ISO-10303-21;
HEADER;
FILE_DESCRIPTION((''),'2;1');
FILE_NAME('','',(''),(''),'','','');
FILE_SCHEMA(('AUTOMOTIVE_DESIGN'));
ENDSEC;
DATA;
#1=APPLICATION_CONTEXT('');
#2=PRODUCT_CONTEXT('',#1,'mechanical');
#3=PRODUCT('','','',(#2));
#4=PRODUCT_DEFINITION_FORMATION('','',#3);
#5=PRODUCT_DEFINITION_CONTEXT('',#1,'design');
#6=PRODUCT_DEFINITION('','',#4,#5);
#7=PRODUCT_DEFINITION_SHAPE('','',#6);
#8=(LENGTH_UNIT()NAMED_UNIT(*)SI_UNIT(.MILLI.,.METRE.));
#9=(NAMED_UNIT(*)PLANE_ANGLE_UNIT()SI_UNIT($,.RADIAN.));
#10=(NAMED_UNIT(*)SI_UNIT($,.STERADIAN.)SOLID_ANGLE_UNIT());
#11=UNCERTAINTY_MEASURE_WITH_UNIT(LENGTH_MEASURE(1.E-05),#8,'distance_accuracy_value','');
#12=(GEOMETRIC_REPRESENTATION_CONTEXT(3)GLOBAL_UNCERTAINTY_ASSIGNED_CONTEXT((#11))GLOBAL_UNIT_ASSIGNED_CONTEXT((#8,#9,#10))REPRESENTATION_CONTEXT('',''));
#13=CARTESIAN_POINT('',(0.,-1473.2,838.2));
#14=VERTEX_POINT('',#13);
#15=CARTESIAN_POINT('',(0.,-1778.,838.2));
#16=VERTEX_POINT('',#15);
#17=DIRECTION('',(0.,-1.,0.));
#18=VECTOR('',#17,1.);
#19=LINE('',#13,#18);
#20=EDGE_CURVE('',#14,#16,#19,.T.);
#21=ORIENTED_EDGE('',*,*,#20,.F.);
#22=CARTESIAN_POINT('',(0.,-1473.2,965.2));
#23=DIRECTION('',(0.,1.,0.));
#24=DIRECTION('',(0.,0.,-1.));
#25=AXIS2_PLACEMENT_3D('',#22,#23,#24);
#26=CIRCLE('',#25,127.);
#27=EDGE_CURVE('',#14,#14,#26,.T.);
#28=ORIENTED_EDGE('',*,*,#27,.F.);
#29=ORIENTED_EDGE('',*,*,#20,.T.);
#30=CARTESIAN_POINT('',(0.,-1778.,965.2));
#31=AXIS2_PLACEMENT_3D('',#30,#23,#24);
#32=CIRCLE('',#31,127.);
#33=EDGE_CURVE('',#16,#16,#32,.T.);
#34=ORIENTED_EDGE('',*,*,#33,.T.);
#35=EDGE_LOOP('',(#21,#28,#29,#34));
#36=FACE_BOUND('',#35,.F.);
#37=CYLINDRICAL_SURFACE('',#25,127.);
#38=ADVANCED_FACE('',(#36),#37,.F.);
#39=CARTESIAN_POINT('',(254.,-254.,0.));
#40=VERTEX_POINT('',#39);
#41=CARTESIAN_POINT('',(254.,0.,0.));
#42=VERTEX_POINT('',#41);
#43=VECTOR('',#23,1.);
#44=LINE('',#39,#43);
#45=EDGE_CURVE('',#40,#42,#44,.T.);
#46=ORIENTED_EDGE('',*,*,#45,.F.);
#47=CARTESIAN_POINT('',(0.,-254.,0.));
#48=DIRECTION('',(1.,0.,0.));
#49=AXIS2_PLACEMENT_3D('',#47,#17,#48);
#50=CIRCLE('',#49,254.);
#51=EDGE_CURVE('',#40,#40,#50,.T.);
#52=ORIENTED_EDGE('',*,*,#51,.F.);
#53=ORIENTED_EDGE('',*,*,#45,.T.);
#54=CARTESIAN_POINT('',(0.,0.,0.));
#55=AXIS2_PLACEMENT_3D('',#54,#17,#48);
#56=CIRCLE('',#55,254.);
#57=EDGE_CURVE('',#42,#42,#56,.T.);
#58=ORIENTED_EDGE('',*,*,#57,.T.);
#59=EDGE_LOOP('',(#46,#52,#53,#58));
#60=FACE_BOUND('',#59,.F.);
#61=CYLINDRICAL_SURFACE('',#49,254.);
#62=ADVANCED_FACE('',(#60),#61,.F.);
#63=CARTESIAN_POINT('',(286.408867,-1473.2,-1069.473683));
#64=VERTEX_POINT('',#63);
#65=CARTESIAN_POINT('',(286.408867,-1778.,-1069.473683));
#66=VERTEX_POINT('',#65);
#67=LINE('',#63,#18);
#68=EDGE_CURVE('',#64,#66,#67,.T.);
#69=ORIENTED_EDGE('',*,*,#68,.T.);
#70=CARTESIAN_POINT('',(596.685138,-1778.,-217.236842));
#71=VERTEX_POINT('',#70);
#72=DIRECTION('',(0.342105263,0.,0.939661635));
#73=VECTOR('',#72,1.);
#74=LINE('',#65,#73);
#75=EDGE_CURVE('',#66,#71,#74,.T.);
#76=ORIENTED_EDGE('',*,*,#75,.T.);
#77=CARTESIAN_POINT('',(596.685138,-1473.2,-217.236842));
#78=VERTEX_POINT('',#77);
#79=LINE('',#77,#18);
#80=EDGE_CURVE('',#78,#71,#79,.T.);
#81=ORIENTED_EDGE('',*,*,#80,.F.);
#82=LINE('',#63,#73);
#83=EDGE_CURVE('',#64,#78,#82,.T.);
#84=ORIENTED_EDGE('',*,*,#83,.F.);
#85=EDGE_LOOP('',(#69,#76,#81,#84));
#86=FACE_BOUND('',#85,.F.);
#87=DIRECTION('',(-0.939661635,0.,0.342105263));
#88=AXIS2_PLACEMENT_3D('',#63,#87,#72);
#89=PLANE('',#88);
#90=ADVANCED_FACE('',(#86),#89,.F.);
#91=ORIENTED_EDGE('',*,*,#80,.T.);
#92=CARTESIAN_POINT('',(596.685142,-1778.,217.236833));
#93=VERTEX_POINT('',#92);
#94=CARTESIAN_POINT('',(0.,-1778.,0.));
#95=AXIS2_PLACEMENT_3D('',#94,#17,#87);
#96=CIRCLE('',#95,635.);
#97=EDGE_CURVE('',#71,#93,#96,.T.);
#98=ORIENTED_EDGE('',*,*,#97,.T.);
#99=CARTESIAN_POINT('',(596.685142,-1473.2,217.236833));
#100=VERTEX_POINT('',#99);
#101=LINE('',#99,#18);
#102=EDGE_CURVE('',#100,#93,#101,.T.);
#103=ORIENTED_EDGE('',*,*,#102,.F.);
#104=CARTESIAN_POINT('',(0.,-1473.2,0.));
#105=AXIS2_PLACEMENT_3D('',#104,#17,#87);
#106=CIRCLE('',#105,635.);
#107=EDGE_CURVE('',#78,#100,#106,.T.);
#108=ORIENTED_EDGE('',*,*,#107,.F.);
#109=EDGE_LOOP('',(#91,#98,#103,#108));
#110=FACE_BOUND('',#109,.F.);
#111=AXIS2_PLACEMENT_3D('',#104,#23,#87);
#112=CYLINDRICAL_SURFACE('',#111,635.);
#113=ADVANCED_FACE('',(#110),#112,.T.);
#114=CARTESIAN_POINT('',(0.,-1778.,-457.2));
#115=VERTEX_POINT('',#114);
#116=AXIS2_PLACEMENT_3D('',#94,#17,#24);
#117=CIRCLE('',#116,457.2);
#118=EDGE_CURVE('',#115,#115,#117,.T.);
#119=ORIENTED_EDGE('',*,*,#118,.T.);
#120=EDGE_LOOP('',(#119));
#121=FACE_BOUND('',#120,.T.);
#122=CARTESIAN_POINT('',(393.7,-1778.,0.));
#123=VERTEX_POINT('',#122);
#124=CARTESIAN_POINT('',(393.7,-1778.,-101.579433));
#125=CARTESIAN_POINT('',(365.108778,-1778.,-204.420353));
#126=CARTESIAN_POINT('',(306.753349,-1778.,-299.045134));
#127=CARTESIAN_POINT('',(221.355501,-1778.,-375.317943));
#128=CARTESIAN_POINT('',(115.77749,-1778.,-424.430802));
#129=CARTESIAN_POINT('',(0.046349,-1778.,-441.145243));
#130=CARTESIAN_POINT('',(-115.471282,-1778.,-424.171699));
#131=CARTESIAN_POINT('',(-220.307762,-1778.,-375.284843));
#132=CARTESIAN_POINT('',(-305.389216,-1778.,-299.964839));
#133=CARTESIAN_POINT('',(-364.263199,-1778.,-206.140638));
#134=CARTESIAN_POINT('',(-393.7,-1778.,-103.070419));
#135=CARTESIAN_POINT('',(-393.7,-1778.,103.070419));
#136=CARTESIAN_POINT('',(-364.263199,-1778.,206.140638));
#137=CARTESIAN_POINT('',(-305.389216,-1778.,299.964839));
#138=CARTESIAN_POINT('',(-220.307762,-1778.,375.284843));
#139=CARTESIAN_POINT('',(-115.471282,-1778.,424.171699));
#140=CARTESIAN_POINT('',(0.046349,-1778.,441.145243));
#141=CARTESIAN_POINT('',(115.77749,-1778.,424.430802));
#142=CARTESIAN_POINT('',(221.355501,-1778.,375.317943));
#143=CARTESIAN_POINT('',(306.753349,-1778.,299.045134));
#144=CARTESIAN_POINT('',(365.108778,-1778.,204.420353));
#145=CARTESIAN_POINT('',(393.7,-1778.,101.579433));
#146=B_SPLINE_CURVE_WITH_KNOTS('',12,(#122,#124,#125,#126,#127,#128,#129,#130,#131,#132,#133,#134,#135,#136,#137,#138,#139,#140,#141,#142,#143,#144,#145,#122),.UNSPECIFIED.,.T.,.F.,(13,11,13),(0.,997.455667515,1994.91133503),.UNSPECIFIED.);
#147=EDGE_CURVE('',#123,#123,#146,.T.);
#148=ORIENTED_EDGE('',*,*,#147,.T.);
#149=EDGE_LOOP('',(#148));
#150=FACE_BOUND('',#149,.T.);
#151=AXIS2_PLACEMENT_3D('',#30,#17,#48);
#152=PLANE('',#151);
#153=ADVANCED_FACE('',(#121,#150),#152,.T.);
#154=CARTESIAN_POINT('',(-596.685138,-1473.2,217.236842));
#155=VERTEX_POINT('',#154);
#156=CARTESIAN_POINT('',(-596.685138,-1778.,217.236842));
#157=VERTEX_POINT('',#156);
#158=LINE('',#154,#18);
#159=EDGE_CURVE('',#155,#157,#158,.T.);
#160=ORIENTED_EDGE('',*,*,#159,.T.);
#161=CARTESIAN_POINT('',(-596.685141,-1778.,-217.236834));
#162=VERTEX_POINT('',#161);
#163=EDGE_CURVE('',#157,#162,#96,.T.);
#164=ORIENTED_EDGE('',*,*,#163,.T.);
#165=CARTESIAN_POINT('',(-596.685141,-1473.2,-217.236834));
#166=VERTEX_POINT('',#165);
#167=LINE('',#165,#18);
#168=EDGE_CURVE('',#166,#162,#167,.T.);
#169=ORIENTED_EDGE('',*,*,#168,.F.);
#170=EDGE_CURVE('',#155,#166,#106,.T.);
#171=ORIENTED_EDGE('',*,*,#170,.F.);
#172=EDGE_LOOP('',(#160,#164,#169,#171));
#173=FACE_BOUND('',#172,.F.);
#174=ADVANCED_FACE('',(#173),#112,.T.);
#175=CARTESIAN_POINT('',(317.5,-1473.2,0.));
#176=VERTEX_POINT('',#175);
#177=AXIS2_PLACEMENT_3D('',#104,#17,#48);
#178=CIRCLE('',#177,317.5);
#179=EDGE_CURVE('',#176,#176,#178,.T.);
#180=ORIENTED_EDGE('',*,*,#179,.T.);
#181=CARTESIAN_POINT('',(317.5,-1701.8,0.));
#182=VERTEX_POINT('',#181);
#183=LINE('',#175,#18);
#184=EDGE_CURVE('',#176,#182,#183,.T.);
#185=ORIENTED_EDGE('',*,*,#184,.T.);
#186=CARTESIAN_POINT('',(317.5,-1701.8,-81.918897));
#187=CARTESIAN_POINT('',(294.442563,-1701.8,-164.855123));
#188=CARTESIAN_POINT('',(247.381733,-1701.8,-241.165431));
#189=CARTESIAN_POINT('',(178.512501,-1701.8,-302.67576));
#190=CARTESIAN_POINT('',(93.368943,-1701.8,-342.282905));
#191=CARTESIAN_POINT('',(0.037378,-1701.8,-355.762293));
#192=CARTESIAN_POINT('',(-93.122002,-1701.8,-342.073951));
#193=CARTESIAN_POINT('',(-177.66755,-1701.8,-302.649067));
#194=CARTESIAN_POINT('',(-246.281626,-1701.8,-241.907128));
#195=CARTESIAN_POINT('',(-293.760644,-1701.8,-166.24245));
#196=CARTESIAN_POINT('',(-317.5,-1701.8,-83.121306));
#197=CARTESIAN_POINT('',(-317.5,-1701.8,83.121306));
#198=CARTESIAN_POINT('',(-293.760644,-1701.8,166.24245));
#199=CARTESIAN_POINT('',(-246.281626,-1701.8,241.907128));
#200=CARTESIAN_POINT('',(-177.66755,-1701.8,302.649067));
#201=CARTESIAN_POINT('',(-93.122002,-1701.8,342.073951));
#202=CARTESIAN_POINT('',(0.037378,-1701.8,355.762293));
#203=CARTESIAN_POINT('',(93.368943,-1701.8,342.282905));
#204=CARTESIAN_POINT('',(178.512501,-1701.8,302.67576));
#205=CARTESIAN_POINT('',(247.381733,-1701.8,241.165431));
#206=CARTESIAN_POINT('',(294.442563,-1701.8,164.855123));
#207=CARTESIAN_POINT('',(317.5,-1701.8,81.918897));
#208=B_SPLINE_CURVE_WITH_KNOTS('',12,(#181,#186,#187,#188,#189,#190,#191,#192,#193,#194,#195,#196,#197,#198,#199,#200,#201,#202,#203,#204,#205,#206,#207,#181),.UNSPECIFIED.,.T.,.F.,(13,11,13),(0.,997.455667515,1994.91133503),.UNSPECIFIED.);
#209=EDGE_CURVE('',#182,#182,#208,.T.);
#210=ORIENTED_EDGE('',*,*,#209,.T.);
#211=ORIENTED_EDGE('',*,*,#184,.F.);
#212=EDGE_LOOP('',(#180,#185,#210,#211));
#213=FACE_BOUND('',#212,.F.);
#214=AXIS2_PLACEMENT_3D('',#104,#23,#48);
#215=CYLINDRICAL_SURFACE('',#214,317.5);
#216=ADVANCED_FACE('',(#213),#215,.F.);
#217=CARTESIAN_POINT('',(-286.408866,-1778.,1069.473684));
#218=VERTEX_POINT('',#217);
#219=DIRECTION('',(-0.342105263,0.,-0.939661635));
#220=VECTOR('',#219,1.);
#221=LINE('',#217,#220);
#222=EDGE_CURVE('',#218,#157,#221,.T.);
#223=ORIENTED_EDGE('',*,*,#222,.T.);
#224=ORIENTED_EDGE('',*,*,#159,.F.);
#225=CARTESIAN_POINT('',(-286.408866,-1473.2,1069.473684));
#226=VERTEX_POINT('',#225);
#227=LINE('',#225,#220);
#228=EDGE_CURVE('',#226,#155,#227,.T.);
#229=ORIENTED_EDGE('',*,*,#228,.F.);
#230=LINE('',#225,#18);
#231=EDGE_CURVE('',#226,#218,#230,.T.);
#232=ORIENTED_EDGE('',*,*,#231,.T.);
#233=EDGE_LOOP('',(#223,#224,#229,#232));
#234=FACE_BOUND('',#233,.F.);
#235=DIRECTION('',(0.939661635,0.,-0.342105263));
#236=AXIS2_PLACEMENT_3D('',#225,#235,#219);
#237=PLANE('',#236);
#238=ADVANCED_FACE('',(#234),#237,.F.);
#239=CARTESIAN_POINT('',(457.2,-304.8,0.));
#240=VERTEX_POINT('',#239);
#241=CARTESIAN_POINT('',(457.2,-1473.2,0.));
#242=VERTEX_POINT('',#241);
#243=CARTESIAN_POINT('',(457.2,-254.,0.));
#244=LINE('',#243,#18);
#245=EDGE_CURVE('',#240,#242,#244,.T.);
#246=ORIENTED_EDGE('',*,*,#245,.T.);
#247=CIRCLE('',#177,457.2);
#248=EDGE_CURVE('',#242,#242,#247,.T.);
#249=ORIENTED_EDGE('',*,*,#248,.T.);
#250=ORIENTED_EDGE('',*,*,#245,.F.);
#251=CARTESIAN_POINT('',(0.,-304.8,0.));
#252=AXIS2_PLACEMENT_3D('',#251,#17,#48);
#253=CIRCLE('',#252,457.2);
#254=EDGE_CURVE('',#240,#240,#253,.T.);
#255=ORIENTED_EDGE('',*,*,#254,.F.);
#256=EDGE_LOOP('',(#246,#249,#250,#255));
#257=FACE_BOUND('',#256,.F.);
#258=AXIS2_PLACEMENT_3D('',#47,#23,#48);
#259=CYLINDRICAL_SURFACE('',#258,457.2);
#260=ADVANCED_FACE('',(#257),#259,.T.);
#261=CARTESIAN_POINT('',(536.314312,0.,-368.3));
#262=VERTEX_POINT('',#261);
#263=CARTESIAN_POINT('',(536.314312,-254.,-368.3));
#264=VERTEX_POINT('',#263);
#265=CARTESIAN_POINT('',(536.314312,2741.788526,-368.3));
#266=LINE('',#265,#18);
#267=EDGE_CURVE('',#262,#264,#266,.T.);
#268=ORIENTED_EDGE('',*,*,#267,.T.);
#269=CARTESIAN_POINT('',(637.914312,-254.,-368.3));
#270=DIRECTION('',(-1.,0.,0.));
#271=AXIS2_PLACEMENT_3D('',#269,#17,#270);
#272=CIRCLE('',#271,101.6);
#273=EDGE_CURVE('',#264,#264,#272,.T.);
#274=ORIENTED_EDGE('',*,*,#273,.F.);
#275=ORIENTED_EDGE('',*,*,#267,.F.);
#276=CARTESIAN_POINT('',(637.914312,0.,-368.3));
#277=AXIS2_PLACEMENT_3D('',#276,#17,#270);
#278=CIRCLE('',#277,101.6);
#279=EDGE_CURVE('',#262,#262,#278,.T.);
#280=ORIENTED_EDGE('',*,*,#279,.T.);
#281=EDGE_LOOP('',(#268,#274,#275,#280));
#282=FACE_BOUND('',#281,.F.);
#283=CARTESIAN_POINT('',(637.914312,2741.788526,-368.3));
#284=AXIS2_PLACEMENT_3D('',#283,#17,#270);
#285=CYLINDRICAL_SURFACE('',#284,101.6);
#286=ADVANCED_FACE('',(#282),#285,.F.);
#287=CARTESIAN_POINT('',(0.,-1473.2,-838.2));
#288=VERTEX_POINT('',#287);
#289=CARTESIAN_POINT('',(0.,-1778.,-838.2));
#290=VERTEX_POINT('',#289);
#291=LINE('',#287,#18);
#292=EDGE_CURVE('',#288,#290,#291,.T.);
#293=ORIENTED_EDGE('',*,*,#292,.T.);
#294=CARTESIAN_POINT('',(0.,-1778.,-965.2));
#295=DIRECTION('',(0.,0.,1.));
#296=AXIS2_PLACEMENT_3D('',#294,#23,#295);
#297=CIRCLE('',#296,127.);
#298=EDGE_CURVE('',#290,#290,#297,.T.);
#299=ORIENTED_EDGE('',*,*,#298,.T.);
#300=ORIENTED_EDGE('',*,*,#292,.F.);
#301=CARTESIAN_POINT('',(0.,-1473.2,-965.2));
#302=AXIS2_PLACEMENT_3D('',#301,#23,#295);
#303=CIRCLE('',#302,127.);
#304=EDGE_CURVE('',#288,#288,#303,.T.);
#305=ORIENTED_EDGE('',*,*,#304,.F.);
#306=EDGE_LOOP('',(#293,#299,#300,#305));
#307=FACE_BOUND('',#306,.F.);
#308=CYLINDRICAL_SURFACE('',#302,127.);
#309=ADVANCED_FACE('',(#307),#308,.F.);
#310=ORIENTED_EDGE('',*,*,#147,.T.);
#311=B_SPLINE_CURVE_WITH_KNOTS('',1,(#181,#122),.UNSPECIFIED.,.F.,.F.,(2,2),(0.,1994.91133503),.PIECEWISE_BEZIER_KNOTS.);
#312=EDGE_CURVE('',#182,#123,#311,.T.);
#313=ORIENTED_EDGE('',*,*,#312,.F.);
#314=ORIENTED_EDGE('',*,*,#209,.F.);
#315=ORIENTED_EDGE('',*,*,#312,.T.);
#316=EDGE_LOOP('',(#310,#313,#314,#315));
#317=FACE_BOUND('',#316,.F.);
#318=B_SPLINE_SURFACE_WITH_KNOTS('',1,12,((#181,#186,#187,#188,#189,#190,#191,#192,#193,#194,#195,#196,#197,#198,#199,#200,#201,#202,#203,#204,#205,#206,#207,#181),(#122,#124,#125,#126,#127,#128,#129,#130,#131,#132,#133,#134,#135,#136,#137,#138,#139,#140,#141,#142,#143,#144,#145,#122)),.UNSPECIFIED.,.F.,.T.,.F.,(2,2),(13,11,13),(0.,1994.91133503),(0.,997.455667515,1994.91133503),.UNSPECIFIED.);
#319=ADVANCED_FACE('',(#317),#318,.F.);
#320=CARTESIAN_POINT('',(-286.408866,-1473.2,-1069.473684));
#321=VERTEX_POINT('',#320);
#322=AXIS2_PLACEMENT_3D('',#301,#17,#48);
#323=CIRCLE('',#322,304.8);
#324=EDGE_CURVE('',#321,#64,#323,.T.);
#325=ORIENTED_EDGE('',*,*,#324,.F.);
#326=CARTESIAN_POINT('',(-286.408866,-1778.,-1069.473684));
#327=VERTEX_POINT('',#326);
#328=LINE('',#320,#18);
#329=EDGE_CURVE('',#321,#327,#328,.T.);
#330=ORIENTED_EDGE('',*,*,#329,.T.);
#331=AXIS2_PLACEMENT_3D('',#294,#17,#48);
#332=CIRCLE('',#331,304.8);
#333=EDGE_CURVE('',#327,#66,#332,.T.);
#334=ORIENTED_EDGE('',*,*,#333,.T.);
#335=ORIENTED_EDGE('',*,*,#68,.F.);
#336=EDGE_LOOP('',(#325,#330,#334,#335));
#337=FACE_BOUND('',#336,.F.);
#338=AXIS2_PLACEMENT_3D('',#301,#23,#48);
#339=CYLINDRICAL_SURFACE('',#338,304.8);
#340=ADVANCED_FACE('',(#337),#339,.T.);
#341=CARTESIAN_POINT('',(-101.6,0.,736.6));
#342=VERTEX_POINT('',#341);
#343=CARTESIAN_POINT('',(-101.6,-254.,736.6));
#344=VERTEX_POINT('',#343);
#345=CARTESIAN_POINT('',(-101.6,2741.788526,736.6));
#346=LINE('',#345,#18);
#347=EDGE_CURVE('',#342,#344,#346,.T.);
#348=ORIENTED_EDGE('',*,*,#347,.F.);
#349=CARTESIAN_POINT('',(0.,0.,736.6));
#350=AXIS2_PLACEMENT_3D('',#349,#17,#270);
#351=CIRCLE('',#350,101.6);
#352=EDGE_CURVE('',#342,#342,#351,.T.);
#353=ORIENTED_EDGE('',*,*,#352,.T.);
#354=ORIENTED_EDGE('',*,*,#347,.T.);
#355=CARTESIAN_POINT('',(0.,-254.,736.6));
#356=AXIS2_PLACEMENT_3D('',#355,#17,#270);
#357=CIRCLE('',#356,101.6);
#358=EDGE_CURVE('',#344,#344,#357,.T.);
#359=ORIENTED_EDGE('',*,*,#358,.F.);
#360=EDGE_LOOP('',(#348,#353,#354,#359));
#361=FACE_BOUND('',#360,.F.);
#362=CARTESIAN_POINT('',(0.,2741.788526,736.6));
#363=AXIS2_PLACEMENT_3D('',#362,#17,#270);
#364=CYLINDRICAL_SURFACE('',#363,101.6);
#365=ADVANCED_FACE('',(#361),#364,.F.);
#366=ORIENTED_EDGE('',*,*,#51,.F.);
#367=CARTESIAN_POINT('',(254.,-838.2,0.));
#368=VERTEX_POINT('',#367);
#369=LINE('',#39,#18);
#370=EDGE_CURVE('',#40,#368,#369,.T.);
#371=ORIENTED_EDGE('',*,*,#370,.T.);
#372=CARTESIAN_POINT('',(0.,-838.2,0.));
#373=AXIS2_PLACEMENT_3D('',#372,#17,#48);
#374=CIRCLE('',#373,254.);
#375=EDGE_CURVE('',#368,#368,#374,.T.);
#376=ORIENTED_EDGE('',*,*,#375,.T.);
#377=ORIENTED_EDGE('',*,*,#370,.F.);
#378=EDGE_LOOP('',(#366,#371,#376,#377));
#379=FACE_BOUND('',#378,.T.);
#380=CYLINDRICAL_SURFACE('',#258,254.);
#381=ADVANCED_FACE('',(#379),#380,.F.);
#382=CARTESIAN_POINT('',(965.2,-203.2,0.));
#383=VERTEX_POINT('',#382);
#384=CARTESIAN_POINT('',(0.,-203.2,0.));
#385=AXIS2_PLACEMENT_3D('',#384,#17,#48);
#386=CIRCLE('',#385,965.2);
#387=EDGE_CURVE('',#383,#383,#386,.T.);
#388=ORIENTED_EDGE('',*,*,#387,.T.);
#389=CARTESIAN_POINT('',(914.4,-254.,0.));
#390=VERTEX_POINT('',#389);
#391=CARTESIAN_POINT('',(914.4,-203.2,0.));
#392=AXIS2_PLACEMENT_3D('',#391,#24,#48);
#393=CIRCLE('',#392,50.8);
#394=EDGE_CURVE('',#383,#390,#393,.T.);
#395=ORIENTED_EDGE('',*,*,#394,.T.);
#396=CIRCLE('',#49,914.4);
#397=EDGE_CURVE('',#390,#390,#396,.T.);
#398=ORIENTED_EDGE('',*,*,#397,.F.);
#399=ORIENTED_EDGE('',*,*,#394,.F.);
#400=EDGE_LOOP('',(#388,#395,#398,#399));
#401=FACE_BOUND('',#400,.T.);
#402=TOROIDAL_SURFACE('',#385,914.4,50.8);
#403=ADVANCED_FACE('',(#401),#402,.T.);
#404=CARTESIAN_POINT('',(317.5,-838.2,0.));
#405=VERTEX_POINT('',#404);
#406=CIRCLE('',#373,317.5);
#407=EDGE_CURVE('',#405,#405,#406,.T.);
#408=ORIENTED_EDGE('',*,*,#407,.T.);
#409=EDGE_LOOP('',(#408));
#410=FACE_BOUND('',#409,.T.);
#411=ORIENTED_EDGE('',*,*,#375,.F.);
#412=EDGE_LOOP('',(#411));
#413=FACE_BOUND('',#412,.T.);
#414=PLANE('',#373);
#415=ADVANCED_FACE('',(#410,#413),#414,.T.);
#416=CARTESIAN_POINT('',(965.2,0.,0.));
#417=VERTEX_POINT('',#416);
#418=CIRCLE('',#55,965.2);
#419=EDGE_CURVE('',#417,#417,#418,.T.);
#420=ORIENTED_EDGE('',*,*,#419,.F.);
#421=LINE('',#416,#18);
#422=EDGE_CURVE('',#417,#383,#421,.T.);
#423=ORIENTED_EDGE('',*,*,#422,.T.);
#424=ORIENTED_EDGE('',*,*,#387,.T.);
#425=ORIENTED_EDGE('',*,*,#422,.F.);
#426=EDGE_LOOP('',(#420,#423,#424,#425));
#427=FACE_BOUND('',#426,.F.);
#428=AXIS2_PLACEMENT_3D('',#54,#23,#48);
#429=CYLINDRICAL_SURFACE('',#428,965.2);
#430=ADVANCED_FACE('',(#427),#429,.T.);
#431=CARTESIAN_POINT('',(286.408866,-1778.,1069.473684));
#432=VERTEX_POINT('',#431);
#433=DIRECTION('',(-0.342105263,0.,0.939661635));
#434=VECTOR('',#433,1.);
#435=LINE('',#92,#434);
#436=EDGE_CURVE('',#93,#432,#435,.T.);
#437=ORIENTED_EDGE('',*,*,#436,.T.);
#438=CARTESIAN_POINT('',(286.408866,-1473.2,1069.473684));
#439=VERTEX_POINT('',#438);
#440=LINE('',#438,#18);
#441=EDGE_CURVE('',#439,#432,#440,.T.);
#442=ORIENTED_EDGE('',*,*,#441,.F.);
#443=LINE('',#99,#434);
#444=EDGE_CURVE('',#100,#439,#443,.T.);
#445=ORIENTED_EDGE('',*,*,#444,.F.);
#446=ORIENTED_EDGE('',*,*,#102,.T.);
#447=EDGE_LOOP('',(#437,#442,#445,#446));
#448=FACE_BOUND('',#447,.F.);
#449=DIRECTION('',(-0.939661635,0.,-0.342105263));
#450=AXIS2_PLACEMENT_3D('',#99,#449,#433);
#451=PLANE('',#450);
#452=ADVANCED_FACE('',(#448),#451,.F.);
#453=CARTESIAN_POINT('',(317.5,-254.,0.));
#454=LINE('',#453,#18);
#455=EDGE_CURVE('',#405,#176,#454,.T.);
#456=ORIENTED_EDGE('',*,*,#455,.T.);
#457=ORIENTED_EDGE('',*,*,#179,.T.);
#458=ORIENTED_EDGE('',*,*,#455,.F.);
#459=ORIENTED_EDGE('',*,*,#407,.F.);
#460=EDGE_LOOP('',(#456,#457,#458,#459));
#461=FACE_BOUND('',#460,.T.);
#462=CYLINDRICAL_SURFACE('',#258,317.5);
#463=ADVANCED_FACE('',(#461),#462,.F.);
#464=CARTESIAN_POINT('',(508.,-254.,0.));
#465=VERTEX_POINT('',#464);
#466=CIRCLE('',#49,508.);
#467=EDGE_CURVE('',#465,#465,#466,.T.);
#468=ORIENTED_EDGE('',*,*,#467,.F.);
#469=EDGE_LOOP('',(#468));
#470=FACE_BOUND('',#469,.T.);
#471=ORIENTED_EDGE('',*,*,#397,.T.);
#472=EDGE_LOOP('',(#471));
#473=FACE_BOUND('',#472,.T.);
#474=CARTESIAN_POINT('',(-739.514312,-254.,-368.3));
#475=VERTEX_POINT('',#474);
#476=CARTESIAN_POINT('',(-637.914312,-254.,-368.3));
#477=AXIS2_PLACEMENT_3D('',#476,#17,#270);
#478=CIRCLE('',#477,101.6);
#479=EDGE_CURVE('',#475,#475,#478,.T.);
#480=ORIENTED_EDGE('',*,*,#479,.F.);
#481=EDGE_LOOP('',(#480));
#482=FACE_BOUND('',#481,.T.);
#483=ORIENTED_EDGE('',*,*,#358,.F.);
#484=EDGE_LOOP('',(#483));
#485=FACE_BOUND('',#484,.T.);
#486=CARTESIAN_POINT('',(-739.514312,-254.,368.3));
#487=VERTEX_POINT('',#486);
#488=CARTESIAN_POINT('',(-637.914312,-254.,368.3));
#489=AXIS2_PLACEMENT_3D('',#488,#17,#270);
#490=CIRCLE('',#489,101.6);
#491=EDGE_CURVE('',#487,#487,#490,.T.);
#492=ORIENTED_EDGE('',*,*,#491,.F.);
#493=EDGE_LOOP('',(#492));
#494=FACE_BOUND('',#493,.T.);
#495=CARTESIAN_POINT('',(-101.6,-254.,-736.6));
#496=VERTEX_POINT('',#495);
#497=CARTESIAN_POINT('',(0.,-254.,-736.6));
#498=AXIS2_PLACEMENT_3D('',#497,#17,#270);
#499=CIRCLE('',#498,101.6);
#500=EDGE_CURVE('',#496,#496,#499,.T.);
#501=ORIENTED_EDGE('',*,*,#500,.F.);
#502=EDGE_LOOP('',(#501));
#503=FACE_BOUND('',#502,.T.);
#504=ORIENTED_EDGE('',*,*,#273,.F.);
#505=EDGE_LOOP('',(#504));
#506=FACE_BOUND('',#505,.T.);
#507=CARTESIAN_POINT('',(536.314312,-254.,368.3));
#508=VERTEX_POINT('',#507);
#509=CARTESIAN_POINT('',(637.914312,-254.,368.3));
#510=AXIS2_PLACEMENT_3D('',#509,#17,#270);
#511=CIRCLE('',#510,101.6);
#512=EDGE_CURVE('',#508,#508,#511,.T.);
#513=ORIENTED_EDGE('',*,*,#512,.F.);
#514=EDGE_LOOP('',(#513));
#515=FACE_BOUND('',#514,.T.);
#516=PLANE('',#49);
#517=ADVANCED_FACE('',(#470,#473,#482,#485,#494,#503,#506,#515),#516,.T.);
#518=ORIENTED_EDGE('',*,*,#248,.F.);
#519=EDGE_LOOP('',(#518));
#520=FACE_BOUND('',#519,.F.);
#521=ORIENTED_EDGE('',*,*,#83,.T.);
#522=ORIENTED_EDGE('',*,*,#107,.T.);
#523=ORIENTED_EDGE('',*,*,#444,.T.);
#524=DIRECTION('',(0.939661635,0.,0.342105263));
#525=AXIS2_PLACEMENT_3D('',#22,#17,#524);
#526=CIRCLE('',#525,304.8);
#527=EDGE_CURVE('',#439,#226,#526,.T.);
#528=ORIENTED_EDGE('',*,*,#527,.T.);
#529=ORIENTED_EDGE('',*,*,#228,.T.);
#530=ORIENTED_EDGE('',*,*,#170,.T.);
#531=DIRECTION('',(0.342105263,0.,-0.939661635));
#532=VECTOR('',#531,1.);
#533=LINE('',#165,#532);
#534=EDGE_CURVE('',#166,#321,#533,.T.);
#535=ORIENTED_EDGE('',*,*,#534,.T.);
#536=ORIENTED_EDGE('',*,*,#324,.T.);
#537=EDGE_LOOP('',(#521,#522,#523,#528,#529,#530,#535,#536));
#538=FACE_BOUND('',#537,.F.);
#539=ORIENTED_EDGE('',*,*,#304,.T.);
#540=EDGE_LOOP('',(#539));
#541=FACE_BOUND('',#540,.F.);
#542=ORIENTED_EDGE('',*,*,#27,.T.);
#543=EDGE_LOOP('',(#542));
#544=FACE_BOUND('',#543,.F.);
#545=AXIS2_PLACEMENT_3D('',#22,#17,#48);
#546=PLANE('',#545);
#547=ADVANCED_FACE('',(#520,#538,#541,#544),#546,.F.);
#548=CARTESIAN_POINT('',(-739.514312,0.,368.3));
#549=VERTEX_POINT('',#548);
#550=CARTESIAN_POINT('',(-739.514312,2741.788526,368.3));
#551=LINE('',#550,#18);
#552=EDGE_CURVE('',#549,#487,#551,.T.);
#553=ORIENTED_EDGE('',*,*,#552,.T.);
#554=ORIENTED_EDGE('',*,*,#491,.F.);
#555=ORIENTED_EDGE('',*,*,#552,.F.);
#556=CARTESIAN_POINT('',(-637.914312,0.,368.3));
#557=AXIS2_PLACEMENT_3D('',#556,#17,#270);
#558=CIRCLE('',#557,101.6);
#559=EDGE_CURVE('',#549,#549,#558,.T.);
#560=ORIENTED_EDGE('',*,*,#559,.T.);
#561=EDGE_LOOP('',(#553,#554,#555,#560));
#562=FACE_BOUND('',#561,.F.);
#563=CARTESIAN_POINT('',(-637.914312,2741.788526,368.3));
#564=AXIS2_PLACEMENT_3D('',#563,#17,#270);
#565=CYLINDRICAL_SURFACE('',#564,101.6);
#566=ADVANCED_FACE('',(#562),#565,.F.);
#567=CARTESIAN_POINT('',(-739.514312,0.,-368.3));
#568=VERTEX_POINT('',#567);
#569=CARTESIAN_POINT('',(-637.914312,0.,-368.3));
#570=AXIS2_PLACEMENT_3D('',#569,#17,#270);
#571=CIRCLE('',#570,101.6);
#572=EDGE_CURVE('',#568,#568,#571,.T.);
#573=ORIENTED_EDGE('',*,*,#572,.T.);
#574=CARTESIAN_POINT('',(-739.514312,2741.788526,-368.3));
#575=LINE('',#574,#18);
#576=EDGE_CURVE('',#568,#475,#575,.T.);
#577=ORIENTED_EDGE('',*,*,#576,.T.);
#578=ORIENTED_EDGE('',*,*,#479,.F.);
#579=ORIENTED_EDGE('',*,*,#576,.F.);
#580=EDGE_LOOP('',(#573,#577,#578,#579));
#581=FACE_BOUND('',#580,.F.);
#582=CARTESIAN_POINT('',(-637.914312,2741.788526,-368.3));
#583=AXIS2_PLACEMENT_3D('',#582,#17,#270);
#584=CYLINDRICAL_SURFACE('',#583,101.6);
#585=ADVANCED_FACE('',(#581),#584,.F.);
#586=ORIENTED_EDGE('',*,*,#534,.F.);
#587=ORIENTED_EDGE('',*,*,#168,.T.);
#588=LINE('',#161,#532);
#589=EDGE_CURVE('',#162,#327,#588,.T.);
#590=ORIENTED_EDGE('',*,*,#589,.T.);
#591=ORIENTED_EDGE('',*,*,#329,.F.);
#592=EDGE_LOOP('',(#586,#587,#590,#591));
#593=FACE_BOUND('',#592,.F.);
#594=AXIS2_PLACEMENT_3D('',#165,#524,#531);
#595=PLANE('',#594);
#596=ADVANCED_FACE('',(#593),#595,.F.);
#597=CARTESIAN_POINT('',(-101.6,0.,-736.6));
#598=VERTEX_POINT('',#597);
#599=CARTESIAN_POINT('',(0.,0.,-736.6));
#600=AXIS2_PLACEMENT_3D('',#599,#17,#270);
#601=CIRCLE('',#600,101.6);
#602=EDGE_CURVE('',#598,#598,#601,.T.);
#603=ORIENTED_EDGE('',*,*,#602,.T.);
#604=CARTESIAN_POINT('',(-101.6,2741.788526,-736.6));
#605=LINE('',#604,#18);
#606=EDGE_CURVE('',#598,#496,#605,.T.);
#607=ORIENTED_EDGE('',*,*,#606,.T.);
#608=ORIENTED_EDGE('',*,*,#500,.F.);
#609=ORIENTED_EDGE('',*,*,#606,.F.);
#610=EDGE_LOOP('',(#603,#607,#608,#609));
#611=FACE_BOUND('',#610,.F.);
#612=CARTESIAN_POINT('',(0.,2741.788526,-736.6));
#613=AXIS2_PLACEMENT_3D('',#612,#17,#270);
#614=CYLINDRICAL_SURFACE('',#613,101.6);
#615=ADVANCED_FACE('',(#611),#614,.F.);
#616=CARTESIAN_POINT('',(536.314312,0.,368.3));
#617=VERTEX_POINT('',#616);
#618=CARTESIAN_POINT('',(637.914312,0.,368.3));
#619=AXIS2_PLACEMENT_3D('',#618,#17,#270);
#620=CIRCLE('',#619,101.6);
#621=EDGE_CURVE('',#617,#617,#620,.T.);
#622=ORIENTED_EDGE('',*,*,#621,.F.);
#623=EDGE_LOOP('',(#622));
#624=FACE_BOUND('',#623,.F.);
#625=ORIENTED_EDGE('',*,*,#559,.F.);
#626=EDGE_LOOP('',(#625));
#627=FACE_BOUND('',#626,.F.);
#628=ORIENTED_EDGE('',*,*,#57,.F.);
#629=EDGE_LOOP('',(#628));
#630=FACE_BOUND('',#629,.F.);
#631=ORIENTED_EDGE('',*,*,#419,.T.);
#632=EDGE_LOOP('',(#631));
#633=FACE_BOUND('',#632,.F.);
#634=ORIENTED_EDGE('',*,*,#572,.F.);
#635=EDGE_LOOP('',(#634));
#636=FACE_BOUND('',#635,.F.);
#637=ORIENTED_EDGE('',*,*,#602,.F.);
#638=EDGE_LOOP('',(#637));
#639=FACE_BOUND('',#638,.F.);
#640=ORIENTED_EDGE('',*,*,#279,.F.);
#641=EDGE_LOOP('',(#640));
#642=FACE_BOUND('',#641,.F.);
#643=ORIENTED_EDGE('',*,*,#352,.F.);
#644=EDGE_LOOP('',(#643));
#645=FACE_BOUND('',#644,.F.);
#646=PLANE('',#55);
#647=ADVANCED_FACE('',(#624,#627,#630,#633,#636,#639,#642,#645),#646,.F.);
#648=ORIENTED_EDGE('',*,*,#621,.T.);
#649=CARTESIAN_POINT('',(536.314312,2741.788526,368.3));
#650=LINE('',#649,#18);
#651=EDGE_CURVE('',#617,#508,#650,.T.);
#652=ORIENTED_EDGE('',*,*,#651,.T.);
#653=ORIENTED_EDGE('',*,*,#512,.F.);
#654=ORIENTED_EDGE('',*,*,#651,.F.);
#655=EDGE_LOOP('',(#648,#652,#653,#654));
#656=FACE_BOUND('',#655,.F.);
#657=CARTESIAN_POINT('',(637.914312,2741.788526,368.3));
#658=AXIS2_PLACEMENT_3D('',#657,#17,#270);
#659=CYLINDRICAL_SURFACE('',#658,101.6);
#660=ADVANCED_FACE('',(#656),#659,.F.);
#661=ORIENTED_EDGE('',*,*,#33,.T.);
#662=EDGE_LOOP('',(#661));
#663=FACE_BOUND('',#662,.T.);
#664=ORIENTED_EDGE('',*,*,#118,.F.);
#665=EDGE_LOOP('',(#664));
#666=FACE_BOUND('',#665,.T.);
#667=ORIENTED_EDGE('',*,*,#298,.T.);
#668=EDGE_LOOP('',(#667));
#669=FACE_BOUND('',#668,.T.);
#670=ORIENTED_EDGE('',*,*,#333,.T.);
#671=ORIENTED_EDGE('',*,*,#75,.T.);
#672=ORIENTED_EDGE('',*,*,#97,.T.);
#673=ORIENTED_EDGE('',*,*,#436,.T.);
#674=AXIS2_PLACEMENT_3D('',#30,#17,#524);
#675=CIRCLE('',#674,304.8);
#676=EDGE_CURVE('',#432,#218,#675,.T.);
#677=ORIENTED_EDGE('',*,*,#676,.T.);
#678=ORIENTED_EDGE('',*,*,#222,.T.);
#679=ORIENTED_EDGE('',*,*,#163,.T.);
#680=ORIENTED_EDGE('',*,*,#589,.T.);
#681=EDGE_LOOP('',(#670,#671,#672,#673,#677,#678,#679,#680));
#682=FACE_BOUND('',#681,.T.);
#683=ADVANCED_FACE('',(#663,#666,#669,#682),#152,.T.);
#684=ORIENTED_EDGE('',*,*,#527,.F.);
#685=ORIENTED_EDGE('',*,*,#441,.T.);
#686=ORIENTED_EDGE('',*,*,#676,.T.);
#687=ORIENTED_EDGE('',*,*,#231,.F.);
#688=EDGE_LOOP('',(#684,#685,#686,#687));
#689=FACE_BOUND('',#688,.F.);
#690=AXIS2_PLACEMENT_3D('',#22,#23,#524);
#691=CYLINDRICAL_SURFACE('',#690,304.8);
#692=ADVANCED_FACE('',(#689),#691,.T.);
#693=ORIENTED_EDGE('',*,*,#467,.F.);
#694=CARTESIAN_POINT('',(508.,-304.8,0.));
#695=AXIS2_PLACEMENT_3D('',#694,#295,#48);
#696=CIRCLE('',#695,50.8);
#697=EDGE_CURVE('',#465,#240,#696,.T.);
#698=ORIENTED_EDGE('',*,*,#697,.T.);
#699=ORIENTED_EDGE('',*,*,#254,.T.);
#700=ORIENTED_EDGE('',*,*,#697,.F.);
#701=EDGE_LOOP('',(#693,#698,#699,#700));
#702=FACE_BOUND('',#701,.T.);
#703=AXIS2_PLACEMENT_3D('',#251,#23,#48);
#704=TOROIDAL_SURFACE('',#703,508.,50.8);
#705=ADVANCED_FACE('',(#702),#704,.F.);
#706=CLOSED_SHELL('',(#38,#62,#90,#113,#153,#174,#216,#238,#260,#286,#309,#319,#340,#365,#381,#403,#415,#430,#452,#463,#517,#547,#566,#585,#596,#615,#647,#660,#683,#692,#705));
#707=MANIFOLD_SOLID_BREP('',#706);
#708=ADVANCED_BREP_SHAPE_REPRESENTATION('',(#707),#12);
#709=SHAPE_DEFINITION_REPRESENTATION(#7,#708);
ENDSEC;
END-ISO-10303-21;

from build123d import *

# Parameters (mm, degrees)
F0_R      = 965.2
F1_DEPTH  = 254
F2_D      = 203.2
F3_R      = 457.2
F3_R_2    = 317.5
F4_DEPTH  = 1219.2
F5_R      = 50.8
F3_R_3    = 254
F6_DEPTH  = 254.001
F7_DEPTH  = 584.2
F10_DEPTH = 304.8
F11_DEPTH = 304.8
F12_SIZE2 = 76.2
F12_SIZE  = 76.2


# Not quite as in the source:
# - a feature names something its author has since deleted; it is built from what else it names


with BuildPart() as f1:
    # F0 (on Front) → F1 (new body)
    with BuildSketch(Plane.XZ):
        Circle(F0_R)
        with BuildLine():
            ThreePointArc((682.5252094596, 277.017866666), (722.9549188186, 141.1231566967), (736.6, 0))
            ThreePointArc((736.6, 0), (722.9549188186, -141.1231566967), (682.5252094596, -277.017866666))
            ThreePointArc((682.5252094596, -277.017866666), (724.0973360995, -314.4943643214), (739.5143124276, -368.3))
            ThreePointArc((739.5143124276, -368.3), (685.6481824631, -457.9885592004), (581.1671145647, -452.5752367823))
            ThreePointArc((581.1671145647, -452.5752367823), (368.3, -637.9143124276), (101.3580948948, -729.5931034483))
            ThreePointArc((101.3580948949, -729.5931034483), (101.5395057141, -733.0944644715), (101.6, -736.6))
            ThreePointArc((101.6, -736.6), (-3.5055355285, -838.1395057141), (-101.3580948949, -729.5931034483))
            ThreePointArc((-101.3580948948, -729.5931034483), (-368.3, -637.9143124276), (-581.1671145647, -452.5752367823))
            ThreePointArc((-581.1671145647, -452.5752367823), (-725.9024934521, -419.1), (-682.5252094596, -277.017866666))
            ThreePointArc((-682.5252094596, -277.017866666), (-736.6, 0), (-682.5252094596, 277.017866666))
            ThreePointArc((-682.5252094596, 277.017866666), (-725.9024934521, 419.1), (-581.1671145647, 452.5752367823))
            ThreePointArc((-581.1671145647, 452.5752367823), (-368.3, 637.9143124276), (-101.3580948948, 729.5931034483))
            ThreePointArc((-101.3580948949, 729.5931034483), (-3.5055355285, 838.1395057141), (101.6, 736.6))
            ThreePointArc((101.6, 736.6), (101.5395057141, 733.0944644715), (101.3580948949, 729.5931034483))
            ThreePointArc((101.3580948948, 729.5931034483), (368.3, 637.9143124276), (581.1671145647, 452.5752367823))
            ThreePointArc((581.1671145647, 452.5752367823), (685.6481824631, 457.9885592004), (739.5143124276, 368.3))
            ThreePointArc((739.5143124276, 368.3), (724.0973360995, 314.4943643214), (682.5252094596, 277.017866666))
        make_face(mode=Mode.SUBTRACT)
        with BuildLine():
            ThreePointArc((682.5252094596, -277.017866666), (722.9549188186, -141.1231566967), (736.6, 0))
            ThreePointArc((736.6, 0), (722.9549188186, 141.1231566967), (682.5252094596, 277.017866666))
            ThreePointArc((682.5252094596, 277.017866666), (549.9261314031, 317.5), (581.1671145647, 452.5752367823))
            ThreePointArc((581.1671145647, 452.5752367823), (368.3, 637.9143124276), (101.3580948948, 729.5931034483))
            ThreePointArc((101.3580948949, 729.5931034483), (0, 635), (-101.3580948949, 729.5931034483))
            ThreePointArc((-101.3580948948, 729.5931034483), (-368.3, 637.9143124276), (-581.1671145647, 452.5752367823))
            ThreePointArc((-581.1671145647, 452.5752367823), (-548.2257532273, 416.0338700355), (-536.3143124276, 368.3))
            ThreePointArc((-536.3143124276, 368.3), (-584.108676749, 282.1169763282), (-682.5252094596, 277.017866666))
            ThreePointArc((-682.5252094596, 277.017866666), (-736.6, 0), (-682.5252094596, -277.017866666))
            ThreePointArc((-682.5252094596, -277.017866666), (-584.108676749, -282.1169763282), (-536.3143124276, -368.3))
            ThreePointArc((-536.3143124276, -368.3), (-548.2257532273, -416.0338700355), (-581.1671145647, -452.5752367823))
            ThreePointArc((-581.1671145647, -452.5752367823), (-368.3, -637.9143124276), (-101.3580948948, -729.5931034483))
            ThreePointArc((-101.3580948949, -729.5931034483), (0, -635), (101.3580948949, -729.5931034483))
            ThreePointArc((101.3580948948, -729.5931034483), (368.3, -637.9143124276), (581.1671145647, -452.5752367823))
            ThreePointArc((581.1671145647, -452.5752367823), (549.9261314031, -317.5), (682.5252094596, -277.017866666))
        make_face()
        with BuildLine():
            ThreePointArc((-682.5252094596, 277.017866666), (-637.9143124276, 368.3), (-581.1671145647, 452.5752367823))
            ThreePointArc((-581.1671145647, 452.5752367823), (-725.9024934521, 419.1), (-682.5252094596, 277.017866666))
        make_face()
        with BuildLine():
            ThreePointArc((-101.3580948948, 729.5931034483), (0, 736.6), (101.3580948948, 729.5931034483))
            ThreePointArc((101.3580948949, 729.5931034483), (101.5395057141, 733.0944644715), (101.6, 736.6))
            ThreePointArc((101.6, 736.6), (-3.5055355285, 838.1395057141), (-101.3580948949, 729.5931034483))
        make_face()
        with BuildLine():
            ThreePointArc((-682.5252094596, -277.017866666), (-725.9024934521, -419.1), (-581.1671145647, -452.5752367823))
            ThreePointArc((-581.1671145647, -452.5752367823), (-637.9143124276, -368.3), (-682.5252094596, -277.017866666))
        make_face()
        with BuildLine():
            ThreePointArc((101.6, -736.6), (101.5395057141, -733.0944644715), (101.3580948949, -729.5931034483))
            ThreePointArc((101.3580948948, -729.5931034483), (0, -736.6), (-101.3580948948, -729.5931034483))
            ThreePointArc((-101.3580948949, -729.5931034483), (-3.5055355285, -838.1395057141), (101.6, -736.6))
        make_face()
        with BuildLine():
            ThreePointArc((739.5143124276, -368.3), (724.0973360995, -314.4943643214), (682.5252094596, -277.017866666))
            ThreePointArc((682.5252094596, -277.017866666), (637.9143124276, -368.3), (581.1671145647, -452.5752367823))
            ThreePointArc((581.1671145647, -452.5752367823), (685.6481824631, -457.9885592004), (739.5143124276, -368.3))
        make_face()
        with BuildLine():
            ThreePointArc((581.1671145647, 452.5752367823), (637.9143124276, 368.3), (682.5252094596, 277.017866666))
            ThreePointArc((682.5252094596, 277.017866666), (724.0973360995, 314.4943643214), (739.5143124276, 368.3))
            ThreePointArc((739.5143124276, 368.3), (685.6481824631, 457.9885592004), (581.1671145647, 452.5752367823))
        make_face()
        with BuildLine():
            ThreePointArc((-536.3143124276, 368.3), (-548.2257532273, 416.0338700355), (-581.1671145647, 452.5752367823))
            ThreePointArc((-581.1671145647, 452.5752367823), (-637.9143124276, 368.3), (-682.5252094596, 277.017866666))
            ThreePointArc((-682.5252094596, 277.017866666), (-584.108676749, 282.1169763282), (-536.3143124276, 368.3))
        make_face()
        with BuildLine():
            ThreePointArc((-101.3580948949, 729.5931034483), (0, 635), (101.3580948949, 729.5931034483))
            ThreePointArc((101.3580948948, 729.5931034483), (0, 736.6), (-101.3580948948, 729.5931034483))
        make_face()
        with BuildLine():
            ThreePointArc((-682.5252094596, -277.017866666), (-637.9143124276, -368.3), (-581.1671145647, -452.5752367823))
            ThreePointArc((-581.1671145647, -452.5752367823), (-548.2257532273, -416.0338700355), (-536.3143124276, -368.3))
            ThreePointArc((-536.3143124276, -368.3), (-584.108676749, -282.1169763282), (-682.5252094596, -277.017866666))
        make_face()
        with BuildLine():
            ThreePointArc((-101.3580948948, -729.5931034483), (0, -736.6), (101.3580948948, -729.5931034483))
            ThreePointArc((101.3580948949, -729.5931034483), (0, -635), (-101.3580948949, -729.5931034483))
        make_face()
        with BuildLine():
            ThreePointArc((581.1671145647, -452.5752367823), (637.9143124276, -368.3), (682.5252094596, -277.017866666))
            ThreePointArc((682.5252094596, -277.017866666), (549.9261314031, -317.5), (581.1671145647, -452.5752367823))
        make_face()
        with BuildLine():
            ThreePointArc((581.1671145647, 452.5752367823), (549.9261314031, 317.5), (682.5252094596, 277.017866666))
            ThreePointArc((682.5252094596, 277.017866666), (637.9143124276, 368.3), (581.1671145647, 452.5752367823))
        make_face()
    extrude(amount=F1_DEPTH)

    # F2 (through all)
    with Locations(Plane(origin=(0, 0, 0), x_dir=(1, 0, 0), z_dir=(0, 1, 0))):
        with Locations((0, -736.6), (-637.9143124276, -368.3), (-637.9143124276, 368.3), (0, 736.6), (637.9143124276, 368.3), (637.9143124276, -368.3)):
            Hole(F2_D / 2)

    # F3 (on face) → F4 (join)
    with BuildSketch(Plane.XZ.offset(254)):
        Circle(F3_R)
        Circle(F3_R_2, mode=Mode.SUBTRACT)
    extrude(amount=F4_DEPTH)

    # F5
    f5_edges = [f1.edges().sort_by_distance(p)[0] for p in [
        (-965.2, -254, 0),
        (-457.2, -254, 0),
    ]]
    fillet(f5_edges, radius=F5_R)

    # F3 (on face) → F6 (cut, through all)
    with BuildSketch(Plane.XZ.offset(254)):
        Circle(F3_R_3)
    extrude(amount=-F6_DEPTH, mode=Mode.SUBTRACT)

    # F3 (on face) → F7 (join)
    with BuildSketch(Plane.XZ.offset(254)):
        Circle(F3_R_2)
        Circle(F3_R_3, mode=Mode.SUBTRACT)
    extrude(amount=F7_DEPTH)

    # F9 (on face) → F10 (join)
    with BuildSketch(Plane.XZ.offset(1473.2)):
        with BuildLine():
            ThreePointArc((0, 660.4), (215.5261469057, 749.6738530943), (304.8, 965.2))
            ThreePointArc((304.8, 965.2), (300.1670055935, 1018.1415597902), (286.40886645, 1069.4736842105))
            ThreePointArc((286.40886645, 1069.4736842105), (0, 1270), (-286.40886645, 1069.4736842105))
            ThreePointArc((-286.40886645, 1069.4736842105), (-249.6854610779, 790.3852107906), (0, 660.4))
        make_face()
        with BuildLine():
            ThreePointArc((127, 965.2), (89.8025612107, 875.3974387893), (0, 838.2))
            ThreePointArc((0, 838.2), (-89.8025612107, 1055.0025612107), (127, 965.2))
        make_face(mode=Mode.SUBTRACT)
        with BuildLine():
            ThreePointArc((286.40886645, 1069.4736842105), (300.1670055935, 1018.1415597902), (304.8, 965.2))
            ThreePointArc((304.8, 965.2), (215.5261469057, 749.6738530943), (0, 660.4))
            Line((0, 660.4), (0, 635))
            ThreePointArc((0, 635), (364.1974814541, 520.1780411576), (596.6851417238, 217.2368330788))
            Line((596.6851417238, 217.2368330788), (286.40886645, 1069.4736842105))
        make_face()
        with BuildLine():
            Line((0, 635), (0, 660.4))
            ThreePointArc((0, 660.4), (-249.6854610779, 790.3852107906), (-286.40886645, 1069.4736842105))
            Line((-286.40886645, 1069.4736842105), (-596.6851384375, 217.2368421053))
            ThreePointArc((-596.6851384375, 217.2368421053), (-364.1974775195, 520.1780439123), (0, 635))
        make_face()
        with BuildLine():
            ThreePointArc((635, 0), (625.3479291541, 110.2949114996), (596.6851417238, 217.2368330788))
            ThreePointArc((596.6851417238, 217.2368330788), (364.1974814541, 520.1780411576), (0, 635))
            Line((0, 635), (0, 457.2))
            Line((0, 457.2), (0, 330.2))
            ThreePointArc((0, 330.2), (233.4866591478, 233.4866591478), (330.2, 0))
            ThreePointArc((330.2, 0), (233.4866591478, -233.4866591478), (0, -330.2))
            Line((0, -330.2), (0, -635))
            ThreePointArc((0, -635), (364.1974775195, -520.1780439123), (596.6851384375, -217.2368421053))
            ThreePointArc((596.6851384375, -217.2368421053), (625.3479283198, -110.2949162297), (635, 0))
        make_face()
        with BuildLine():
            Line((0, 457.2), (0, 635))
            ThreePointArc((0, 635), (-364.1974775195, 520.1780439123), (-596.6851384375, 217.2368421053))
            ThreePointArc((-596.6851384375, 217.2368421053), (-635, 4.0958e-06), (-596.6851412398, -217.236834408))
            ThreePointArc((-596.6851412398, -217.236834408), (-364.1974808747, -520.1780415632), (0, -635))
            Line((0, -635), (0, -330.2))
            ThreePointArc((0, -330.2), (-233.4866591478, -233.4866591478), (-330.2, 0))
            Line((-330.2, 0), (-457.2, 0))
            ThreePointArc((-457.2, 0), (-323.2892203585, 323.2892203585), (0, 457.2))
        make_face()
        with BuildLine():
            Line((0, 330.2), (0, 457.2))
            ThreePointArc((0, 457.2), (-323.2892203585, 323.2892203585), (-457.2, 0))
            Line((-457.2, 0), (-330.2, 0))
            ThreePointArc((-330.2, 0), (-233.4866591478, 233.4866591478), (0, 330.2))
        make_face()
        with BuildLine():
            ThreePointArc((0, -635), (-364.1974808747, -520.1780415632), (-596.6851412398, -217.236834408))
            Line((-596.6851412398, -217.236834408), (-286.40886645, -1069.4736842105))
            ThreePointArc((-286.40886645, -1069.4736842105), (-249.6854610779, -790.3852107906), (0, -660.4))
            Line((0, -660.4), (0, -635))
        make_face()
        with BuildLine():
            Line((286.4088669044, -1069.4736829624), (596.6851384375, -217.2368421053))
            ThreePointArc((596.6851384375, -217.2368421053), (364.1974775195, -520.1780439123), (0, -635))
            Line((0, -635), (0, -660.4))
            ThreePointArc((0, -660.4), (215.5261469057, -749.6738530943), (304.8, -965.2))
            ThreePointArc((304.8, -965.2), (300.1670057089, -1018.1415591362), (286.4088669044, -1069.4736829624))
        make_face()
        with BuildLine():
            ThreePointArc((0, -660.4), (-249.6854610779, -790.3852107906), (-286.40886645, -1069.4736842105))
            ThreePointArc((-286.40886645, -1069.4736842105), (6.642e-07, -1270), (286.4088669044, -1069.4736829624))
            ThreePointArc((286.4088669044, -1069.4736829624), (300.1670057089, -1018.1415591362), (304.8, -965.2))
            ThreePointArc((304.8, -965.2), (215.5261469057, -749.6738530943), (0, -660.4))
        make_face()
        with BuildLine():
            ThreePointArc((127, -965.2), (-89.8025612107, -1055.0025612107), (0, -838.2))
            ThreePointArc((0, -838.2), (89.8025612107, -875.3974387893), (127, -965.2))
        make_face(mode=Mode.SUBTRACT)
    extrude(amount=F10_DEPTH)

    # F8 (on face) → F11 (join)
    with BuildSketch(Plane.XZ.offset(1473.2)):
        with BuildLine():
            Line((0, -457.2), (0, -317.5))
            ThreePointArc((0, -317.5), (-224.5064030267, -224.5064030267), (-317.5, 0))
            Line((-317.5, 0), (-457.2, 0))
            ThreePointArc((-457.2, 0), (-323.2892203585, -323.2892203585), (0, -457.2))
        make_face()
        with BuildLine():
            ThreePointArc((-317.5, 0), (-224.5064030267, 224.5064030267), (0, 317.5))
            Line((0, 317.5), (0, 457.2))
            ThreePointArc((0, 457.2), (-323.2892203585, 323.2892203585), (-457.2, 0))
            Line((-457.2, 0), (-317.5, 0))
        make_face()
        with BuildLine():
            Line((0, 457.2), (0, 317.5))
            ThreePointArc((0, 317.5), (224.5064030267, 224.5064030267), (317.5, 0))
            Line((317.5, 0), (457.2, 0))
            ThreePointArc((457.2, 0), (323.2892203585, 323.2892203585), (0, 457.2))
        make_face()
        with BuildLine():
            ThreePointArc((317.5, 0), (224.5064030267, -224.5064030267), (0, -317.5))
            Line((0, -317.5), (0, -457.2))
            ThreePointArc((0, -457.2), (323.2892203585, -323.2892203585), (457.2, 0))
            Line((457.2, 0), (317.5, 0))
        make_face()
    extrude(amount=F11_DEPTH)

    # F12
    f12_edges = [f1.edges().sort_by_distance(p)[0] for p in [
        (-317.5, -1778, 0),
    ]]
    chamfer(f12_edges, length=F12_SIZE, length2=F12_SIZE2)


solid = f1.part
